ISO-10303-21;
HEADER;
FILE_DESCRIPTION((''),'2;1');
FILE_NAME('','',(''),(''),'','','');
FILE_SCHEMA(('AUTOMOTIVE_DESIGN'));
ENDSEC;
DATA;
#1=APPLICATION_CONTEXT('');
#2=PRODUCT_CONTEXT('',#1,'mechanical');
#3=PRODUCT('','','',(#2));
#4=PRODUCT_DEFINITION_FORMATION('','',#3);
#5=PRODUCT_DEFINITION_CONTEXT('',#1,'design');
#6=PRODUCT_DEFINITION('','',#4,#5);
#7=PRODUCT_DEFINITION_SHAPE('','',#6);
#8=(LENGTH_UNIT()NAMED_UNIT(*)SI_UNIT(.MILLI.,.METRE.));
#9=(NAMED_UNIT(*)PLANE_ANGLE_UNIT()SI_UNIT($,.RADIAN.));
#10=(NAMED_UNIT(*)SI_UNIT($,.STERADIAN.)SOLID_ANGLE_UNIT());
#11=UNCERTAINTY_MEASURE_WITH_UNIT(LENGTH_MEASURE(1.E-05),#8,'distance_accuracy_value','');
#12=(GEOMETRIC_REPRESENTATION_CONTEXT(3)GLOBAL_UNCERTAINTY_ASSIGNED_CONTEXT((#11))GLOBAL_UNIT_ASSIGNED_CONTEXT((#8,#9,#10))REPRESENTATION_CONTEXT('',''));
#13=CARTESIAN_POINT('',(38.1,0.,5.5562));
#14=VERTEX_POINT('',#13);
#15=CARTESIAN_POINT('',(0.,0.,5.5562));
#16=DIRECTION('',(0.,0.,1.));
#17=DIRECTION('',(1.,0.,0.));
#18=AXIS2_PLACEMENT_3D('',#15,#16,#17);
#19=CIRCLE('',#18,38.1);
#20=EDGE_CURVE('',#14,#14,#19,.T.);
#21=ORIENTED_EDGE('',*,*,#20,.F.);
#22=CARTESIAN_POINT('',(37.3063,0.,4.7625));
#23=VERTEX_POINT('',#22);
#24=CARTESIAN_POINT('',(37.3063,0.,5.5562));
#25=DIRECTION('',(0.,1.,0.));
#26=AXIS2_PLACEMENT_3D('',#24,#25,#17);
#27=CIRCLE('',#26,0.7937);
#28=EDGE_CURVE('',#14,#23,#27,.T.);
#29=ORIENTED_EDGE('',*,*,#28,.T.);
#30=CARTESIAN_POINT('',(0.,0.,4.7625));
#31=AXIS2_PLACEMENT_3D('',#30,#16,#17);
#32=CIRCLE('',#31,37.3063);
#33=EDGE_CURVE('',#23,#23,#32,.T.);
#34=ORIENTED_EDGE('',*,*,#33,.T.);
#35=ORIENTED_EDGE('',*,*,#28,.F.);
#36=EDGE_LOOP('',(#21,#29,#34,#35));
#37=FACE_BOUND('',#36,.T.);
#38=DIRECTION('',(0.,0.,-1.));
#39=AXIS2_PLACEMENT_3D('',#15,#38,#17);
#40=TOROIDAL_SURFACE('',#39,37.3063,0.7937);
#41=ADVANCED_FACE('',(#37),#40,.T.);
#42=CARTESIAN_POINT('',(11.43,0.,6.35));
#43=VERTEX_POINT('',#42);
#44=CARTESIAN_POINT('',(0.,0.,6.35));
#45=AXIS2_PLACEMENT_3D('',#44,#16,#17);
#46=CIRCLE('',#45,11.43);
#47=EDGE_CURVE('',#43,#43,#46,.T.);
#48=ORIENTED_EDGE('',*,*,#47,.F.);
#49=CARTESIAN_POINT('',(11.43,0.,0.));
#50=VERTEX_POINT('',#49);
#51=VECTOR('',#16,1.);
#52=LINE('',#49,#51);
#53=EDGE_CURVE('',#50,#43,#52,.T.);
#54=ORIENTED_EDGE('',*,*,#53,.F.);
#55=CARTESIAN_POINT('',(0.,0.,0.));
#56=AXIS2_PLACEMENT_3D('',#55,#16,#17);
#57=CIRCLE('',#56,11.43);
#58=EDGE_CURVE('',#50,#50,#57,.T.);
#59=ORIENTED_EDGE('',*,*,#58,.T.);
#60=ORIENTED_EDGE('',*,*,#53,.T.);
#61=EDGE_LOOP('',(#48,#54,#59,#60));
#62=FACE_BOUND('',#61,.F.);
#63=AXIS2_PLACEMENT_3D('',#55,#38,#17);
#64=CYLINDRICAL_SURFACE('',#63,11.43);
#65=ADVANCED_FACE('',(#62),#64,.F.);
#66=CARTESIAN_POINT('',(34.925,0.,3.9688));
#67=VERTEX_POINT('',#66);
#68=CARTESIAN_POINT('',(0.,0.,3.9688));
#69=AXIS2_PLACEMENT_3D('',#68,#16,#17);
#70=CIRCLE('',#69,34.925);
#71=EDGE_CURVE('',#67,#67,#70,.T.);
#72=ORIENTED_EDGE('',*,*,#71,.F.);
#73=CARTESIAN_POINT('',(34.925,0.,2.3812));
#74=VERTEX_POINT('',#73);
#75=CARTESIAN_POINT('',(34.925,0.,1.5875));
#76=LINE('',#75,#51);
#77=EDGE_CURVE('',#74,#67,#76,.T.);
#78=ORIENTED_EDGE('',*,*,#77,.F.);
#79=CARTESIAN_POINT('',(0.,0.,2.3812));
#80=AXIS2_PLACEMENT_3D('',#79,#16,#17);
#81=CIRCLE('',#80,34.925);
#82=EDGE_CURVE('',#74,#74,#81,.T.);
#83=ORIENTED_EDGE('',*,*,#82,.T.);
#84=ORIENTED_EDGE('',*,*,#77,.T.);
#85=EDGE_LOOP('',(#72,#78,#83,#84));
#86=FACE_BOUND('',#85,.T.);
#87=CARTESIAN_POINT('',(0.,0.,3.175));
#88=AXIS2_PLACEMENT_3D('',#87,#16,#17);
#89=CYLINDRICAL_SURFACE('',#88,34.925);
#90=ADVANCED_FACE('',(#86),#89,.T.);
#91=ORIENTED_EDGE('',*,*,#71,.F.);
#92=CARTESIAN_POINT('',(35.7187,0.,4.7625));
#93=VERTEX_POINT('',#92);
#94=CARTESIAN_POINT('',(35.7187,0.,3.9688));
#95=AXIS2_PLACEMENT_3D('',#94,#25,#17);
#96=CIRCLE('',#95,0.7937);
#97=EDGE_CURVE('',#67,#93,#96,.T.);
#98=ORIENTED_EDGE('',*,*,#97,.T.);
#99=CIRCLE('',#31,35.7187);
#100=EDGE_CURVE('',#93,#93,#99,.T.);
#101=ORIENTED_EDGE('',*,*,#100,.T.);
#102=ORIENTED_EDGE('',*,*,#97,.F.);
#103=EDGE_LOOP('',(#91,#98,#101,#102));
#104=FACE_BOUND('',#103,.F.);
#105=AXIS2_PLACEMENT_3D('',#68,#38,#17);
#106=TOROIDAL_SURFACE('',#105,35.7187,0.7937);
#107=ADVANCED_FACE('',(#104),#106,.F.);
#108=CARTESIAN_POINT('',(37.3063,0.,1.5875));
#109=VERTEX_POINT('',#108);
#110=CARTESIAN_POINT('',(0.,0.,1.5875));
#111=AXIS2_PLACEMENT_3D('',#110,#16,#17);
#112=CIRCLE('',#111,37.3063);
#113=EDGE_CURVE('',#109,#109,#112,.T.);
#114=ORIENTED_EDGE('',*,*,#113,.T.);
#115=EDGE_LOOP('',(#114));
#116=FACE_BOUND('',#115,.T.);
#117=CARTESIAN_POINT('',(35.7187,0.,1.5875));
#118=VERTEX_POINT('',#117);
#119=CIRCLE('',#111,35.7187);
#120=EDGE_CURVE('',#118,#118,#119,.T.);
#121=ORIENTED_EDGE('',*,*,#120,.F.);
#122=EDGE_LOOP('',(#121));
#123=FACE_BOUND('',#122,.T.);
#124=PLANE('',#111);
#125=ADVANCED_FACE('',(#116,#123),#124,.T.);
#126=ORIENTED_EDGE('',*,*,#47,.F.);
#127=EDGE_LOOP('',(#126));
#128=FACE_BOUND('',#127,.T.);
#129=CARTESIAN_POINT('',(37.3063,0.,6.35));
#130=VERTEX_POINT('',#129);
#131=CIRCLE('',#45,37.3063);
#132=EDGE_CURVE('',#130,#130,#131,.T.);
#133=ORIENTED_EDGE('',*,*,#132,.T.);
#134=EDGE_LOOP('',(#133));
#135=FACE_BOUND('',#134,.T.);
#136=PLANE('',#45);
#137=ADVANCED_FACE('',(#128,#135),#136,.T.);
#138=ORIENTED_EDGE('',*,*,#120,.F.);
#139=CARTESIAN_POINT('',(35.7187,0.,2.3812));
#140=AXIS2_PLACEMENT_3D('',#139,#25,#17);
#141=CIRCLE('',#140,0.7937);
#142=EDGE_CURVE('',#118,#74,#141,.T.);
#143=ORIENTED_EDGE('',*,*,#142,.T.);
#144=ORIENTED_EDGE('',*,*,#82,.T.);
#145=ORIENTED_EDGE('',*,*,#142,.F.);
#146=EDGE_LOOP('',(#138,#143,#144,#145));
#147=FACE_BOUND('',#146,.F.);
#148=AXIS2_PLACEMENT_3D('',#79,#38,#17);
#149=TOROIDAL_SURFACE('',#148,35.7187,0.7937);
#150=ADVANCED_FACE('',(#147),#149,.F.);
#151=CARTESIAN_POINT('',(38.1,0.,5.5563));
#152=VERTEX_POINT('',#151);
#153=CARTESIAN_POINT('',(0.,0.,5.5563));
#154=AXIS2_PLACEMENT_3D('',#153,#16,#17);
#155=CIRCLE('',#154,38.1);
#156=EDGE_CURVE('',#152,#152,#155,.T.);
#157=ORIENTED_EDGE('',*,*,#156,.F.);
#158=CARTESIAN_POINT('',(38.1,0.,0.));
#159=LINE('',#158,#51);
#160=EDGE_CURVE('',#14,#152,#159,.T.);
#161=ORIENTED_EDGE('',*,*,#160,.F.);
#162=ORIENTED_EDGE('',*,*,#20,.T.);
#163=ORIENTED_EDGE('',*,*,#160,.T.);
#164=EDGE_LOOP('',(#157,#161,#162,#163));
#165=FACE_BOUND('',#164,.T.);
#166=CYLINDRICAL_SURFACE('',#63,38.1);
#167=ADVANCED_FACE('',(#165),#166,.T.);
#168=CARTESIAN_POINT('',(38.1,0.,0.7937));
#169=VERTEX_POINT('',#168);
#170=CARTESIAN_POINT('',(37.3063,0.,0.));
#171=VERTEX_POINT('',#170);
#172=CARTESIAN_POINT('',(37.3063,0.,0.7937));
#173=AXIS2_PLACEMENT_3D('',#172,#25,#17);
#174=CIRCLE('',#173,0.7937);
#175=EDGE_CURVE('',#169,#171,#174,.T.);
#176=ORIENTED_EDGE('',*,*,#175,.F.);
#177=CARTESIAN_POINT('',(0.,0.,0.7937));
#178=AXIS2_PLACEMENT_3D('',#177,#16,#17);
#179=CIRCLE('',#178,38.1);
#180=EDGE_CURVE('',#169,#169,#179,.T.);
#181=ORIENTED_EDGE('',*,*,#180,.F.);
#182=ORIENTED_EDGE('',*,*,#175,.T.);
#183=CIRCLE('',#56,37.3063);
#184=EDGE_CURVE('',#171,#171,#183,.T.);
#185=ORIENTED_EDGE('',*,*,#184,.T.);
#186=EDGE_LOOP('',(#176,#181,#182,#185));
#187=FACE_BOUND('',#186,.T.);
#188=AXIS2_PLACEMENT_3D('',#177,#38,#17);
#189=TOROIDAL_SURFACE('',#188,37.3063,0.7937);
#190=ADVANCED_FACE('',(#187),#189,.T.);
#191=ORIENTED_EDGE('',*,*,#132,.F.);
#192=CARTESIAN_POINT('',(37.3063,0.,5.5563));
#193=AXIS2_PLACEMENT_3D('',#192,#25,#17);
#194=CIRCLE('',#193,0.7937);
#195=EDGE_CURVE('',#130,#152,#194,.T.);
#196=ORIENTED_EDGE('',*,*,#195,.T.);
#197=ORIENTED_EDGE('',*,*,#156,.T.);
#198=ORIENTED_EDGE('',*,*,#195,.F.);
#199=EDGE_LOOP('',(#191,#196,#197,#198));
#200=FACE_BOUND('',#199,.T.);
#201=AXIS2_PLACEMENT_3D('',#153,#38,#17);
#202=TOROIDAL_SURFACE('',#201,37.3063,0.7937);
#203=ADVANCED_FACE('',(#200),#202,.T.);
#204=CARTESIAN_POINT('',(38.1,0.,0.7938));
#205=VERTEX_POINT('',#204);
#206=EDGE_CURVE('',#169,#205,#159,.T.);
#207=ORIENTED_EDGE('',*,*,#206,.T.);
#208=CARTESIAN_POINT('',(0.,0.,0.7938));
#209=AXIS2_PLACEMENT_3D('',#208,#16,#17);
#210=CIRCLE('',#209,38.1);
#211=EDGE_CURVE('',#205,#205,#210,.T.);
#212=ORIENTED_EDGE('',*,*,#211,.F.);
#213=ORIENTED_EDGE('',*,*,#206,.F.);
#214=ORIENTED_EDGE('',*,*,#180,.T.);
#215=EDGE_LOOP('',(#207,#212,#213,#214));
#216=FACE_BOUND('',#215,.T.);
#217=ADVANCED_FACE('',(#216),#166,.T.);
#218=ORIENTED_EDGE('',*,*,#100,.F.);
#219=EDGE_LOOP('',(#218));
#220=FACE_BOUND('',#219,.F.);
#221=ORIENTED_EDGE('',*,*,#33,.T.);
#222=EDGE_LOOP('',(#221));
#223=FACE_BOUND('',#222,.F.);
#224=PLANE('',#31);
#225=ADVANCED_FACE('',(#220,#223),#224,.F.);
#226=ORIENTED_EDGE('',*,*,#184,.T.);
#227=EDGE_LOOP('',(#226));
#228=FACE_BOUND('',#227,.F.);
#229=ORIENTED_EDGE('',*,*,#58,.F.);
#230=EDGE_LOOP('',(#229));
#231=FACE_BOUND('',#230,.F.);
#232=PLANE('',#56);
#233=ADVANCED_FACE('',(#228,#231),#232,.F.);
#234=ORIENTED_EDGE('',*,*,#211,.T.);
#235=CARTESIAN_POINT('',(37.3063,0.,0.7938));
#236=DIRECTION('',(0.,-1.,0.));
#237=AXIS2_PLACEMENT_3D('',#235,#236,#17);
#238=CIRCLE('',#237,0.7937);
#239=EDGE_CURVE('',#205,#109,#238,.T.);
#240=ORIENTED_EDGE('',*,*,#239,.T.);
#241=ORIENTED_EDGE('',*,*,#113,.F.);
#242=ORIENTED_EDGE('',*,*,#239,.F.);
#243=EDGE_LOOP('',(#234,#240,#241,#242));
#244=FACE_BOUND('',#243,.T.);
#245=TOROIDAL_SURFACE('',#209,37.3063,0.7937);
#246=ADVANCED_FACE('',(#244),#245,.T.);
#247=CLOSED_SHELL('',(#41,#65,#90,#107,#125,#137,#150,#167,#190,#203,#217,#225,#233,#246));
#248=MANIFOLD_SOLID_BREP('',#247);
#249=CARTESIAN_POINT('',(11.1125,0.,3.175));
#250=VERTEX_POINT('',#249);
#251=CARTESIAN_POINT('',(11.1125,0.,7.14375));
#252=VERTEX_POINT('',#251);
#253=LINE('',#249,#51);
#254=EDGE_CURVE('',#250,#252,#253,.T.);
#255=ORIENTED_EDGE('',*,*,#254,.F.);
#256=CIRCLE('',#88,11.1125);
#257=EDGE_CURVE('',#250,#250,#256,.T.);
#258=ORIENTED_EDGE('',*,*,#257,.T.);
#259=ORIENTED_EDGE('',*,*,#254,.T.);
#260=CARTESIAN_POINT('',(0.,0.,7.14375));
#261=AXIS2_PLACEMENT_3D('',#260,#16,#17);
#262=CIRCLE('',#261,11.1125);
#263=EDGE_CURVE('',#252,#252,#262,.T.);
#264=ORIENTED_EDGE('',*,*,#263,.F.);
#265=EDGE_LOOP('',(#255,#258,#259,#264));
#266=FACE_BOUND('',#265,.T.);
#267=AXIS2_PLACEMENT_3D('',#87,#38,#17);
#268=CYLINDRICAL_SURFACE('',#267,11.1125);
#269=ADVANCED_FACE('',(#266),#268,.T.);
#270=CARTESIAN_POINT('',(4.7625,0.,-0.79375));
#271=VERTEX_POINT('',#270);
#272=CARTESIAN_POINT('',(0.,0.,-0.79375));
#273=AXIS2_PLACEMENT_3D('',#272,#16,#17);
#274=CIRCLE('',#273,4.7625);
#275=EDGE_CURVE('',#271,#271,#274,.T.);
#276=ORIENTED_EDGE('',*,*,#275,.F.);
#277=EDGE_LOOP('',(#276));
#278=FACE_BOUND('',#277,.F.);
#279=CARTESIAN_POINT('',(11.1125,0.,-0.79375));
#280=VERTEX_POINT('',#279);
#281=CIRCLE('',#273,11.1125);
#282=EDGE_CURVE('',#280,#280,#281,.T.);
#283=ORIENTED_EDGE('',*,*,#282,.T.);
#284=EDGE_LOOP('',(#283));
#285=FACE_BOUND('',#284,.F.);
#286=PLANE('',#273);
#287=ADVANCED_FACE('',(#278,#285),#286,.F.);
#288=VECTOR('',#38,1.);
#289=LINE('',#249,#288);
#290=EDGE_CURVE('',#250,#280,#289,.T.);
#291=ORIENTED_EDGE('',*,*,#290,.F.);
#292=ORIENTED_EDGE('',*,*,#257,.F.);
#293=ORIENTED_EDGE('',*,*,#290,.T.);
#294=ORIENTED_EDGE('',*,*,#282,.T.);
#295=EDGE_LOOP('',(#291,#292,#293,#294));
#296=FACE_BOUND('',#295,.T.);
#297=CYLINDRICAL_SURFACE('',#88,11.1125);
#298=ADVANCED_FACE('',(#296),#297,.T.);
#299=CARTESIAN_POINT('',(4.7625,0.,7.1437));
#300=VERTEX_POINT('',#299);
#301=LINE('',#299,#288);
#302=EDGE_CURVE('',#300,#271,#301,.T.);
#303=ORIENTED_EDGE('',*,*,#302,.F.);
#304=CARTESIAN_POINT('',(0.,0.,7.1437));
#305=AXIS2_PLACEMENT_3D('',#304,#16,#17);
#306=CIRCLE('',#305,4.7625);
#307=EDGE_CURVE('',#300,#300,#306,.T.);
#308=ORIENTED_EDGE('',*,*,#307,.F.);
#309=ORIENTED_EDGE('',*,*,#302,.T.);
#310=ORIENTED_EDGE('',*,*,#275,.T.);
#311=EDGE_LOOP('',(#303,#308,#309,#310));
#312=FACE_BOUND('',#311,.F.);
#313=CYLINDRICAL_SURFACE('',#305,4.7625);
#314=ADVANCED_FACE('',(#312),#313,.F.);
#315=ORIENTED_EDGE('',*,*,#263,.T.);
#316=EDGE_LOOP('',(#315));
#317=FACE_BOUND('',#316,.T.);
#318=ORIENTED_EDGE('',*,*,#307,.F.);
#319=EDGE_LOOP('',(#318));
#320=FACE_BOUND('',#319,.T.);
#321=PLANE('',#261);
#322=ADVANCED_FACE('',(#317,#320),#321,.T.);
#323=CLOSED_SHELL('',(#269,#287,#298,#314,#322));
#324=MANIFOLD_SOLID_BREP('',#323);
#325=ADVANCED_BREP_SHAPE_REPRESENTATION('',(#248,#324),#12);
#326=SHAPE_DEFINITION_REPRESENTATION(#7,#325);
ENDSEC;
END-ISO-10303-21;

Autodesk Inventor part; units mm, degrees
ref_plane "YZ Plane" through (0, 0, 0) normal (1, 0, 0) x (0, 1, 0)
ref_plane "XZ Plane" through (0, 0, 0) normal (0, 1, 0) x (-1, 0, 0)
sketch "Sketch1" plane through (0, 0, 0) normal (0, 0, 1) x (1, 0, 0)
  circle A0 centre (0, 0) radius 11.43
  circle A1 centre (0, 0) radius 38.1
  dimension "d0" = 22.86
  dimension "d1" = 76.2
extrude "Extrusion1" add sketch "Sketch1" along normal blind 6.35
ref_plane "Work Plane1" through (0, 0, 3.175) normal (0, 0, 1) x (1, 0, 0)
sketch "Sketch3" plane through (0, 0, 3.175) normal (0, 0, 1) x (1, 0, 0)
  circle A0 centre (0, 0) radius 11.1125
  dimension "d9" = 22.225
extrude "Extrusion3" add sketch "Sketch3" along normal mid plane 7.9375
sketch "Sketch4" plane through (0, 0, 7.1437) normal (0, 0, 1) x (1, 0, 0)
  circle A0 centre (0, 0) radius 4.7625
  dimension "d12" = 9.525
extrude "Extrusion4" cut sketch "Sketch4" against normal blind 25.4
sketch "Sketch5" plane through (0, 0, 3.175) normal (0, 0, 1) x (1, 0, 0)
  circle A0 centre (0, 0) radius 38.1
  circle A1 centre (0, 0) radius 34.925
  circle A2 centre (0, 0) radius 11.43 projected
  circle A3 centre (0, 0) radius 38.1 projected
  dimension "d15" = 3.175
  dimension "d16" = 0
extrude "Extrusion5" cut sketch "Sketch5" along normal mid plane 3.175 contours A0
fillet "Fillet2" radius 0.7937 6 edges at (-38.1, 0, 0) (-38.1, 0, 1.5875) (-34.925, 0, 1.5875) (-38.1, 0, 6.35) (-38.1, 0, 4.7625) (-34.925, 0, 4.7625)
properties part number "2in pulley"
